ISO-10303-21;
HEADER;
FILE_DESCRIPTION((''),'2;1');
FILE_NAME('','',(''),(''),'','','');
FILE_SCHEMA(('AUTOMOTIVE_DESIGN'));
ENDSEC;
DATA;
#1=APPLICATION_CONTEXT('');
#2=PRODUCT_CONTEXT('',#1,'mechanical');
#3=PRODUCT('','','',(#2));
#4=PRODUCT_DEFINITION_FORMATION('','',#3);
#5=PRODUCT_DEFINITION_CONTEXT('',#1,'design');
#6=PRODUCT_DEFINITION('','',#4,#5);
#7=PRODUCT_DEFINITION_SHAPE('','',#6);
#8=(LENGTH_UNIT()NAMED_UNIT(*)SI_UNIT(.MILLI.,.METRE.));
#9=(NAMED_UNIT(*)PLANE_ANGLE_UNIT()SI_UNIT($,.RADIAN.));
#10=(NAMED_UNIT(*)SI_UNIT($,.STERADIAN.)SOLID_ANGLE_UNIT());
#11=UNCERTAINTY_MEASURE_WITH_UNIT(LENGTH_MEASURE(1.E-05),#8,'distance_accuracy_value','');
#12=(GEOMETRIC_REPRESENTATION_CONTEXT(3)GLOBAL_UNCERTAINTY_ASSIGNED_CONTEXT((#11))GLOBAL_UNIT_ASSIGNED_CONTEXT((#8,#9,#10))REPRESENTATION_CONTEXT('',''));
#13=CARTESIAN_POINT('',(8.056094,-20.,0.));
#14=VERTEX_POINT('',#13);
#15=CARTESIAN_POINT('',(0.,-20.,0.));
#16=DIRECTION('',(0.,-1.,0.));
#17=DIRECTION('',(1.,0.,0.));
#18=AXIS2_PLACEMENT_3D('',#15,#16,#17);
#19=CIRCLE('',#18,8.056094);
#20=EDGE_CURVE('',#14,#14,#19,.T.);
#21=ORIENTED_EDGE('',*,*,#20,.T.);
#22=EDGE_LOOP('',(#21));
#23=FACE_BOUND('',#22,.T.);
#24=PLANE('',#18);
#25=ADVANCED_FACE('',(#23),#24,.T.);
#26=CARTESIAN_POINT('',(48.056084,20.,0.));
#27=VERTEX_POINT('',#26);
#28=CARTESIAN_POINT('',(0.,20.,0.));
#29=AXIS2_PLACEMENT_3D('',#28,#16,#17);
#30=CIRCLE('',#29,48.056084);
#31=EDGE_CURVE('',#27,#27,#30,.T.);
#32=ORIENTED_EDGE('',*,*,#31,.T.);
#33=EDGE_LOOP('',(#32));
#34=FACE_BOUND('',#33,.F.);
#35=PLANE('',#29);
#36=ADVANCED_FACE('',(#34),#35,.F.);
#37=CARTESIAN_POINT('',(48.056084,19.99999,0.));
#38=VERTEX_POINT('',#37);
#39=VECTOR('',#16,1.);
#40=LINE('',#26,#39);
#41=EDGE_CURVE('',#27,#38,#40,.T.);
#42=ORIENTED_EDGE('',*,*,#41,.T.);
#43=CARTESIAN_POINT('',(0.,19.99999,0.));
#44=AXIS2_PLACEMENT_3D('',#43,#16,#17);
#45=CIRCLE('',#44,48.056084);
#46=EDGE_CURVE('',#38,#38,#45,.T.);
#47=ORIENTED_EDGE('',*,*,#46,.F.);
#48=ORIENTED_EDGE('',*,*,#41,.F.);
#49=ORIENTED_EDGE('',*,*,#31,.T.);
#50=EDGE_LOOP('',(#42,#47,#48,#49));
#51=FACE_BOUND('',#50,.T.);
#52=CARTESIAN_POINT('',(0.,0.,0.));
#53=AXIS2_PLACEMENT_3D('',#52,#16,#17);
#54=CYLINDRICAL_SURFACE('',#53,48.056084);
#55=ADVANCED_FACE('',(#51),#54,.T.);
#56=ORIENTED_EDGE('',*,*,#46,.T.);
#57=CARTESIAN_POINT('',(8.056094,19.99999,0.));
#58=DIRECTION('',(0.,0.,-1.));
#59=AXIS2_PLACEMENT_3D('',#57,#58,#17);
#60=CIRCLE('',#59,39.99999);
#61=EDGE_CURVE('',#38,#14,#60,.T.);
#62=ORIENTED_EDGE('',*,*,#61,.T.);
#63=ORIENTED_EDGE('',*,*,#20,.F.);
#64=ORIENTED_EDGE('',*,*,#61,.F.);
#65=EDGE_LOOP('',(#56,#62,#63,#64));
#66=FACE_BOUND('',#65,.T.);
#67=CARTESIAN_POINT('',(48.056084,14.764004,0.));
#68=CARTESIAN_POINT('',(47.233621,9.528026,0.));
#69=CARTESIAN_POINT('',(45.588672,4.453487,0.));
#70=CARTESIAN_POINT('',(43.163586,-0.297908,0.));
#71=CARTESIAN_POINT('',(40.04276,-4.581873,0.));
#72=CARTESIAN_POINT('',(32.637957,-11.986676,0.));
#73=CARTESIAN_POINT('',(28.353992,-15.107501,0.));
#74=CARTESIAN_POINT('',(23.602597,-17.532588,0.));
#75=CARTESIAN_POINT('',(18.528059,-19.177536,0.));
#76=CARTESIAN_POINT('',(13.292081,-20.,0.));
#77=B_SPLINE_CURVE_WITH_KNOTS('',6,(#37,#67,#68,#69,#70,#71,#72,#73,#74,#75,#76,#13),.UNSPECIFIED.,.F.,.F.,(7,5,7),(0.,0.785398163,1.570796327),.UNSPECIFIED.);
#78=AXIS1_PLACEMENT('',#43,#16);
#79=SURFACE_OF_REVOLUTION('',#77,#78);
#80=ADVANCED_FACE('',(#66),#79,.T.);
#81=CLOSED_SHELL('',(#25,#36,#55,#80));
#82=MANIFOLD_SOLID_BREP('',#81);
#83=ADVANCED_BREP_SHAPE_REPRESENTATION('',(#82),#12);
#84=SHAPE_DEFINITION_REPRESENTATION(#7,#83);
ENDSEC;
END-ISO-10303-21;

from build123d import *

# Parameters (mm, degrees)
F0_R     = 48.0560844675
F1_DEPTH = 20
F2_R     = 39.99999


# Not quite as in the source:
# - a fillet or chamfer is up to 0.001 mm smaller than in the source, because OpenCascade refuses the exact size


with BuildPart() as f1:
    # F0 (on Front) → F1 (new body, symmetric)
    with BuildSketch(Plane.XZ):
        Circle(F0_R)
    extrude(amount=F1_DEPTH, both=True)

    # F2 (radius 40 in the source; OpenCascade refuses exactly that, so slightly less here)
    f2_edges = [f1.edges().sort_by_distance(p)[0] for p in [
        (-48.056084, -20, 0),
    ]]
    fillet(f2_edges, radius=F2_R)


solid = f1.part
